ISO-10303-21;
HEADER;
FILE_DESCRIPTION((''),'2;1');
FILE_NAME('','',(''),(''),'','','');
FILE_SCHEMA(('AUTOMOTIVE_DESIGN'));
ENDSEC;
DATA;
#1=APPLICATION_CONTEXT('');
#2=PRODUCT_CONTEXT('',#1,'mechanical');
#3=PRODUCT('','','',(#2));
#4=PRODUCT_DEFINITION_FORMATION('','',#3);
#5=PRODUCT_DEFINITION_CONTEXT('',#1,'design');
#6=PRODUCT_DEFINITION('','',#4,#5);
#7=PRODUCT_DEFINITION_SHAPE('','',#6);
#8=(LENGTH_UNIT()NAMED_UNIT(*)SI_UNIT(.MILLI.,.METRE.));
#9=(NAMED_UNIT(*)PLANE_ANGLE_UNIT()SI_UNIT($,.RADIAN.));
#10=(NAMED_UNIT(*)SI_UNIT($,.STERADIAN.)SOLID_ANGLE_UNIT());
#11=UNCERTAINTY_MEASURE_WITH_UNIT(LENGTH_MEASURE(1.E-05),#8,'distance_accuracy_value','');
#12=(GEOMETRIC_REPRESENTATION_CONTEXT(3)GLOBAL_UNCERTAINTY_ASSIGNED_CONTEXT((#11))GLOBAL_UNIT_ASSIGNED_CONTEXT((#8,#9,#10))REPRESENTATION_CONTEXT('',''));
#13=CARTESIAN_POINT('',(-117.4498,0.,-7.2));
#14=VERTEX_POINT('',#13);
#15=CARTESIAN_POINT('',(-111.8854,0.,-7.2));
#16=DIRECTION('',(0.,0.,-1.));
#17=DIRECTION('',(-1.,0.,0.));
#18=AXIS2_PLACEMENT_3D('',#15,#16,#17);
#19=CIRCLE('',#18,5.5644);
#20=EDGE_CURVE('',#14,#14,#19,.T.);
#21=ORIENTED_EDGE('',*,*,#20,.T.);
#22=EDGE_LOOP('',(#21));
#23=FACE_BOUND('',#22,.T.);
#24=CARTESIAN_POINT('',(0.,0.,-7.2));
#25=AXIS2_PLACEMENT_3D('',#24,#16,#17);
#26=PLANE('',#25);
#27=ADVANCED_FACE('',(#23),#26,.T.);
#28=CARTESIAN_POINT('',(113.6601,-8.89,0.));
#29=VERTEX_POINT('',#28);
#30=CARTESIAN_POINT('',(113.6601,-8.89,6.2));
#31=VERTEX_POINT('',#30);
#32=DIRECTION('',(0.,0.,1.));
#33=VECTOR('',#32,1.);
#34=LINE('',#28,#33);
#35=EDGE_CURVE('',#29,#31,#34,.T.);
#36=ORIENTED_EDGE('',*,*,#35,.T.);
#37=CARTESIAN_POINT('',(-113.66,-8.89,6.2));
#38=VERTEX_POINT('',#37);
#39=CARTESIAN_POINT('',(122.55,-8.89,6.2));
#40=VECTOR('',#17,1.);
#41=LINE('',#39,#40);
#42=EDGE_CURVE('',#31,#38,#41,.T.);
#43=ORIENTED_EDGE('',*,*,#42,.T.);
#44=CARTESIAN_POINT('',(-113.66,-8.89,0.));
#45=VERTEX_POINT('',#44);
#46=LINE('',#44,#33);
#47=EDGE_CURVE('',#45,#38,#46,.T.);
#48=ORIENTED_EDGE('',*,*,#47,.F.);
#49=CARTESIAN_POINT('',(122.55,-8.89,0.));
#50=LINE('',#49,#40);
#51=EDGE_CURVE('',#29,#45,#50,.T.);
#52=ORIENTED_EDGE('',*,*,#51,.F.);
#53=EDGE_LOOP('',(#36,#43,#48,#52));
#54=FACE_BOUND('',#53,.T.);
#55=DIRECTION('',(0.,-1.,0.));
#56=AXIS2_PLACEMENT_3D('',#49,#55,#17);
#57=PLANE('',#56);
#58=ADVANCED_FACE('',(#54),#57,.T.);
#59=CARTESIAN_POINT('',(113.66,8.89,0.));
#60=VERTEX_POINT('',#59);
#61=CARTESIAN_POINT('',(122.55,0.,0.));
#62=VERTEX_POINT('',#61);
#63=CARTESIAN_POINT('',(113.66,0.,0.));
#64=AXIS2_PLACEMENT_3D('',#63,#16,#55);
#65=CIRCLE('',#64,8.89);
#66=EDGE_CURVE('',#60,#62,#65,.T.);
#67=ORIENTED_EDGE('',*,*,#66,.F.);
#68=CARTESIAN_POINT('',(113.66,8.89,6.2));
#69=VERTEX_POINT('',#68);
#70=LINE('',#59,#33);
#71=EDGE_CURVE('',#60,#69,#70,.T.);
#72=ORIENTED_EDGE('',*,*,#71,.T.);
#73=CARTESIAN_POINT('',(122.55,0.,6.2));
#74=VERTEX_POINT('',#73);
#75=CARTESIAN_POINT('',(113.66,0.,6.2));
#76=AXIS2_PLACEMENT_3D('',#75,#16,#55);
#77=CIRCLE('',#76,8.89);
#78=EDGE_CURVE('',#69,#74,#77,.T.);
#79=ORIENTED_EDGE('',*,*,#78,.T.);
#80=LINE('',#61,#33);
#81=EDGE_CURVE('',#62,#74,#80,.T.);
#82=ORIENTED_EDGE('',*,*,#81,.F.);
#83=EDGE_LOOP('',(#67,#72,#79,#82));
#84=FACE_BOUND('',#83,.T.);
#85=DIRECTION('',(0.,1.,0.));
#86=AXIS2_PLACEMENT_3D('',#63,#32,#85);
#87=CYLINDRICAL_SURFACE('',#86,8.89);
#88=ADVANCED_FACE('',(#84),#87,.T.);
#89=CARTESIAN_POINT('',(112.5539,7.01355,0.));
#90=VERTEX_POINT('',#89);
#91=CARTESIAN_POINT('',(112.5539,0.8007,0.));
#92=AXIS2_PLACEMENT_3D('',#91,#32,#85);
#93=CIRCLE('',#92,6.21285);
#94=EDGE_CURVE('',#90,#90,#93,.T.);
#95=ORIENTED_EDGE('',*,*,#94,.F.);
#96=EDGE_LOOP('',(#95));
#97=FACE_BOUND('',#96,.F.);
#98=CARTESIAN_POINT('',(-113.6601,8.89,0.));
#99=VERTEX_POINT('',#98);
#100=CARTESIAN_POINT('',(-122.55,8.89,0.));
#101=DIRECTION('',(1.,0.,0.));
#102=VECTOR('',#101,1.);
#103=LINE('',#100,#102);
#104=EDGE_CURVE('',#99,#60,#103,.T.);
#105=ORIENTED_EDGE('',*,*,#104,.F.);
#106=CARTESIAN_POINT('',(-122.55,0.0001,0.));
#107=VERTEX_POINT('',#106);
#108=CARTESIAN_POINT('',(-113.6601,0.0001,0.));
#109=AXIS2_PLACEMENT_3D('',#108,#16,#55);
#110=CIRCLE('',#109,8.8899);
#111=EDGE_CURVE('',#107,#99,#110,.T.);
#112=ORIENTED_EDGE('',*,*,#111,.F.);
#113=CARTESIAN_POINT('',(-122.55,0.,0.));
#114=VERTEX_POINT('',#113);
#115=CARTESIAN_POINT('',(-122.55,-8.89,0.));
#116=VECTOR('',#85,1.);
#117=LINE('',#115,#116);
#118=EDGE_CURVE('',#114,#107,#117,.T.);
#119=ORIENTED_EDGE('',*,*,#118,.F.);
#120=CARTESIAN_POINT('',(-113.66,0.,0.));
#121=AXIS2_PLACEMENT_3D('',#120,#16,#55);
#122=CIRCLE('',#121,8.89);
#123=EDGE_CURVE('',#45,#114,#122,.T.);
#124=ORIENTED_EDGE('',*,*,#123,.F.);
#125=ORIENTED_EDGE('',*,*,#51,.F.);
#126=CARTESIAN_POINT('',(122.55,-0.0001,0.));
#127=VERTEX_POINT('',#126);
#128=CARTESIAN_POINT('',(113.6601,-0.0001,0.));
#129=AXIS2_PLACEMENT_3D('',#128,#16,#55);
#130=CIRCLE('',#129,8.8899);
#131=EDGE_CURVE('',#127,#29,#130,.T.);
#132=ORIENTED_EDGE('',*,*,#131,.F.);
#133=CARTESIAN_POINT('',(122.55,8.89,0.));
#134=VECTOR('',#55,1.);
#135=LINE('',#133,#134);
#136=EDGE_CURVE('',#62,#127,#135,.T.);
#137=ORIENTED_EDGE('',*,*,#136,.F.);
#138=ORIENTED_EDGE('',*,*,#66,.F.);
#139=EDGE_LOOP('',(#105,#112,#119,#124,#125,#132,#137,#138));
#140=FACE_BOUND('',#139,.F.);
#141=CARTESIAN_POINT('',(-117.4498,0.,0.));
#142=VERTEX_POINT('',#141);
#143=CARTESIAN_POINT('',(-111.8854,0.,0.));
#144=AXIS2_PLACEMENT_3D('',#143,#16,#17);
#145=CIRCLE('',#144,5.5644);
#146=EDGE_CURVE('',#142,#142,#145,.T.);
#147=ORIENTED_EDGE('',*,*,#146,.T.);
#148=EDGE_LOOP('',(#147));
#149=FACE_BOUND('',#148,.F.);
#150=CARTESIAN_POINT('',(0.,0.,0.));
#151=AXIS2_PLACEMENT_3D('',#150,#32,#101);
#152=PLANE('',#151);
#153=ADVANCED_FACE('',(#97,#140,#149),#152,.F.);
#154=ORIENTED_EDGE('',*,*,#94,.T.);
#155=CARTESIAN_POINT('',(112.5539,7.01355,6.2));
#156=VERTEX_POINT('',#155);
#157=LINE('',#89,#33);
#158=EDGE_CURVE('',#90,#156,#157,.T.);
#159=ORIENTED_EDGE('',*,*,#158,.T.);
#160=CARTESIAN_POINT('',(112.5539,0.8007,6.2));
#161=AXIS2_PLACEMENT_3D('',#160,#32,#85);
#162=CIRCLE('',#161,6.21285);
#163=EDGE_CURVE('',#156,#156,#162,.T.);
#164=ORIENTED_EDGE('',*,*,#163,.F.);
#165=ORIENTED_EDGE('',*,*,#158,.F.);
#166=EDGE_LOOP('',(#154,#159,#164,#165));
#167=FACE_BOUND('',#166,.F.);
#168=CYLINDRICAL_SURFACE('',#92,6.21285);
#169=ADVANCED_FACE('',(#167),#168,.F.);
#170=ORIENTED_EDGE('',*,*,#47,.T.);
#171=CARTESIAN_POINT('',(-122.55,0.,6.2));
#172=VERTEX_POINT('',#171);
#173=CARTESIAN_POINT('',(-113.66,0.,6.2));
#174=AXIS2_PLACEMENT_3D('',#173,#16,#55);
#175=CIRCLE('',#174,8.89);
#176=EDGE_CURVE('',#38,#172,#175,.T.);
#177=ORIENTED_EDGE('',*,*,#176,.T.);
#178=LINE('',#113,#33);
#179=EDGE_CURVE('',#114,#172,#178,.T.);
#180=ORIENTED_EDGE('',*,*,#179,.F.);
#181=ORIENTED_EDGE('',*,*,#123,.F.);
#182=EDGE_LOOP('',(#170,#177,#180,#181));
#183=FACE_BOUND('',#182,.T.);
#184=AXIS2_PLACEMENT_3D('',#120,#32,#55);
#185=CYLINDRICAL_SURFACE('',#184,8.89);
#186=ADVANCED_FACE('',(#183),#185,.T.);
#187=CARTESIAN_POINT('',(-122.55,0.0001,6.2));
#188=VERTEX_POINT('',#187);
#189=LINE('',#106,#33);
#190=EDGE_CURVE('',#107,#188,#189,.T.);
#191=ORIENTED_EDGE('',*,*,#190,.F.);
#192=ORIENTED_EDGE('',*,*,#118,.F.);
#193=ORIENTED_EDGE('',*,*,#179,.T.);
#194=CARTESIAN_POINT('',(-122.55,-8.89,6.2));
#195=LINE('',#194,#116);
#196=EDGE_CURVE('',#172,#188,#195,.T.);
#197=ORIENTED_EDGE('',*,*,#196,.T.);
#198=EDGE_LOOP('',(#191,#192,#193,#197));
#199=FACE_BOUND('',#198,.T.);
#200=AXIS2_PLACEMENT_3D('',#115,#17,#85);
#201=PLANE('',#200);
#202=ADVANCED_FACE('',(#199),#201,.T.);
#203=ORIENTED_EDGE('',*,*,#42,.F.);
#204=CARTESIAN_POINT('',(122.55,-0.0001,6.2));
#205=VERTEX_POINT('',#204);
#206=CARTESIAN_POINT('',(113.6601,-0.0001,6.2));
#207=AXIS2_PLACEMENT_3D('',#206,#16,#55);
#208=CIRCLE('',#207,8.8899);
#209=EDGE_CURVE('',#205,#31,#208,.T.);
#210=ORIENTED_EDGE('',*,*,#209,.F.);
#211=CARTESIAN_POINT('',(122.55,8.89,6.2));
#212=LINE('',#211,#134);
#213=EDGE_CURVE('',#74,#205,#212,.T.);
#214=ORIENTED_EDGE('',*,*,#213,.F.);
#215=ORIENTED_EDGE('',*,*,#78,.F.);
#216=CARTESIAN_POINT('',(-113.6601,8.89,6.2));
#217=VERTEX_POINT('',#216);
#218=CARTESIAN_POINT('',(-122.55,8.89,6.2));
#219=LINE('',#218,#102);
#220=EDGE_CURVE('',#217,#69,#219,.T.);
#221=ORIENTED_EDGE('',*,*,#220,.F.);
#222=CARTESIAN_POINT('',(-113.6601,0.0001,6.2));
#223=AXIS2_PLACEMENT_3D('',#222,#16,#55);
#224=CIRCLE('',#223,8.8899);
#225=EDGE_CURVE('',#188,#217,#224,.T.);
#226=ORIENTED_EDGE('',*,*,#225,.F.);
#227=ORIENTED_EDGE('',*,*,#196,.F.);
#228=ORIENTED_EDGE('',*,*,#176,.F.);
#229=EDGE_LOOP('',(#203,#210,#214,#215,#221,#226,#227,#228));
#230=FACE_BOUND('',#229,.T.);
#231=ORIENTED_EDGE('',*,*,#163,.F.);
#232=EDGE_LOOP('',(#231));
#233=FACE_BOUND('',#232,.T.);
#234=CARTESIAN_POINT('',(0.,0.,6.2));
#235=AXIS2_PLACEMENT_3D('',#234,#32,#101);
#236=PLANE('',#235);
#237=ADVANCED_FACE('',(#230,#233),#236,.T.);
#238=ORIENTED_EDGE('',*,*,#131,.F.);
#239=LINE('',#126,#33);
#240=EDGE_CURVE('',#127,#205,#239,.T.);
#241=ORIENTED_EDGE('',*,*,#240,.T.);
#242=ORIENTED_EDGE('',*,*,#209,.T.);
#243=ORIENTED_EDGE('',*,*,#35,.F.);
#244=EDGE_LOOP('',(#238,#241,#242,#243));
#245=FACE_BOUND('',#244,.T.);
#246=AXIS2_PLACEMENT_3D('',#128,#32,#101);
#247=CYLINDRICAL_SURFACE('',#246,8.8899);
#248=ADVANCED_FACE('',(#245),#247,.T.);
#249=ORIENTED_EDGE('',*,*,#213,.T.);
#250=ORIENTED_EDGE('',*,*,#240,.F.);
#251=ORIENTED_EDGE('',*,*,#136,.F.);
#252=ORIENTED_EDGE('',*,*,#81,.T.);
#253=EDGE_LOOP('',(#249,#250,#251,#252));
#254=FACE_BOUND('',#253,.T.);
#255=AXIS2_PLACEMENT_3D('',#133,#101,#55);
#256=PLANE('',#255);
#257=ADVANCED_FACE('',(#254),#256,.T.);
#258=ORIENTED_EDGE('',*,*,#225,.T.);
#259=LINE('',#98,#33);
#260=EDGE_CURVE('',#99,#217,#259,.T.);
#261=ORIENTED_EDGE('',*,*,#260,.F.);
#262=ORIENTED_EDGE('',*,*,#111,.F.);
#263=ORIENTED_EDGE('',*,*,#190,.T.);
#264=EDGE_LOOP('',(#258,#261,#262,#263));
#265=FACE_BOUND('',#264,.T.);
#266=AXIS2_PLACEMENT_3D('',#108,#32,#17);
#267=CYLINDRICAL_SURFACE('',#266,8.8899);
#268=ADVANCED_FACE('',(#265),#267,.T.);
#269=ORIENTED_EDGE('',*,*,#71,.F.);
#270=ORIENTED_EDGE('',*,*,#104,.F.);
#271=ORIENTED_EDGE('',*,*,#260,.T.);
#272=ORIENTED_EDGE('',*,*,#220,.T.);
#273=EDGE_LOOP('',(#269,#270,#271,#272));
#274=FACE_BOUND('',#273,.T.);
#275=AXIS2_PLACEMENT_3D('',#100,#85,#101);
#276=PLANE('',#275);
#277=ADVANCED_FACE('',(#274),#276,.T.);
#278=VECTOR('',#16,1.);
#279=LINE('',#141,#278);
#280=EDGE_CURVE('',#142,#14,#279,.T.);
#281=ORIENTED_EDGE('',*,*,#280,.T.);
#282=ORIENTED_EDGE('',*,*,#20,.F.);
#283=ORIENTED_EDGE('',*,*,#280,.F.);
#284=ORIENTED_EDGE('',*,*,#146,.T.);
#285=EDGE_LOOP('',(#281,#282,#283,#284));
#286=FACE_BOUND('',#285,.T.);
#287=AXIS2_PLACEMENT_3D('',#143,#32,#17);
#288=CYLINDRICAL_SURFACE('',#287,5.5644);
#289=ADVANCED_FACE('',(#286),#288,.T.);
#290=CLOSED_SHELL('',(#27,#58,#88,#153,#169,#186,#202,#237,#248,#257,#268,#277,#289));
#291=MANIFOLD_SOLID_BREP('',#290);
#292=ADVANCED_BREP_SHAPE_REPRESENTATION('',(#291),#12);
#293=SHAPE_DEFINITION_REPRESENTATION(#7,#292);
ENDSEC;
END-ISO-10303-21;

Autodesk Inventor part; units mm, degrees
ref_plane "YZ Plane" through (0, 0, 0) normal (1, 0, 0) x (0, 1, 0)
ref_plane "XZ Plane" through (0, 0, 0) normal (0, 1, 0) x (-1, 0, 0)
ref_plane "XY Plane" through (0, 0, 0) normal (0, 0, 1) x (1, 0, 0)
sketch "Sketch1" plane through (0, 0, 0) normal (0, 0, 1) x (1, 0, 0)
  line L0 (-122.55, 8.89) -> (122.55, 8.89)
  line L1 (122.55, 8.89) -> (122.55, -8.89)
  line L2 (122.55, -8.89) -> (-122.55, -8.89)
  line L3 (-122.55, -8.89) -> (-122.55, 8.89)
  line L4 (-122.55, 8.89) -> (122.55, -8.89) construction
  line L5 (122.55, 8.89) -> (-122.55, -8.89) construction
  point P0 (0, 0)
  dimension "d0" = 245.1
  dimension "d1" = 17.78
extrude "Extrusion1" add sketch "Sketch1" along normal blind 6.2
fillet "Fillet1" radius 8.89 1 edges at (122.55, 8.89, 3.1)
fillet "Fillet2" radius 8.89 1 edges at (122.55, -8.89, 3.1)
fillet "Fillet3" radius 8.89 1 edges at (-122.55, -8.89, 3.1)
fillet "Fillet4" radius 8.89 1 edges at (-122.55, 8.89, 3.1)
sketch "Sketch6" plane through (0, 0, 0) normal (0, 0, -1) x (-1, 0, 0)
  circle A0 centre (111.8854, 0) radius 5.5644
  point P0 (0, 0)
extrude "Extrusion4" add sketch "Sketch6" along normal blind 7.2
sketch "Sketch7" plane through (0, 0, 0) normal (0, 0, -1) x (-1, 0, 0)
  point P0 (0, 0)
  point P1 (-112.5539, 0.8007)
hole "Hole3" at (112.5539, 0.8007, 0) direction (0, 0, 1) diameter 12.4257 end through all
equation "\"BendRadius\" = Thickness"
equation "\"BendReliefWidth\" = Thickness"
equation "\"BendReliefDepth\" = 0.5 * Thickness"
equation "\"CornerReliefSize\" = 4 * Thickness"
equation "\"MinimumRemnant\" = 2 * Thickness"
equation "\"TransitionRadius\" = BendRadius"
equation "\"JacobiRadiusSize\" = BendRadius"
equation "\"GapSize\" = Thickness"
equation "\"Thickness\" = 3.048"
properties part number "cranker rod part"
